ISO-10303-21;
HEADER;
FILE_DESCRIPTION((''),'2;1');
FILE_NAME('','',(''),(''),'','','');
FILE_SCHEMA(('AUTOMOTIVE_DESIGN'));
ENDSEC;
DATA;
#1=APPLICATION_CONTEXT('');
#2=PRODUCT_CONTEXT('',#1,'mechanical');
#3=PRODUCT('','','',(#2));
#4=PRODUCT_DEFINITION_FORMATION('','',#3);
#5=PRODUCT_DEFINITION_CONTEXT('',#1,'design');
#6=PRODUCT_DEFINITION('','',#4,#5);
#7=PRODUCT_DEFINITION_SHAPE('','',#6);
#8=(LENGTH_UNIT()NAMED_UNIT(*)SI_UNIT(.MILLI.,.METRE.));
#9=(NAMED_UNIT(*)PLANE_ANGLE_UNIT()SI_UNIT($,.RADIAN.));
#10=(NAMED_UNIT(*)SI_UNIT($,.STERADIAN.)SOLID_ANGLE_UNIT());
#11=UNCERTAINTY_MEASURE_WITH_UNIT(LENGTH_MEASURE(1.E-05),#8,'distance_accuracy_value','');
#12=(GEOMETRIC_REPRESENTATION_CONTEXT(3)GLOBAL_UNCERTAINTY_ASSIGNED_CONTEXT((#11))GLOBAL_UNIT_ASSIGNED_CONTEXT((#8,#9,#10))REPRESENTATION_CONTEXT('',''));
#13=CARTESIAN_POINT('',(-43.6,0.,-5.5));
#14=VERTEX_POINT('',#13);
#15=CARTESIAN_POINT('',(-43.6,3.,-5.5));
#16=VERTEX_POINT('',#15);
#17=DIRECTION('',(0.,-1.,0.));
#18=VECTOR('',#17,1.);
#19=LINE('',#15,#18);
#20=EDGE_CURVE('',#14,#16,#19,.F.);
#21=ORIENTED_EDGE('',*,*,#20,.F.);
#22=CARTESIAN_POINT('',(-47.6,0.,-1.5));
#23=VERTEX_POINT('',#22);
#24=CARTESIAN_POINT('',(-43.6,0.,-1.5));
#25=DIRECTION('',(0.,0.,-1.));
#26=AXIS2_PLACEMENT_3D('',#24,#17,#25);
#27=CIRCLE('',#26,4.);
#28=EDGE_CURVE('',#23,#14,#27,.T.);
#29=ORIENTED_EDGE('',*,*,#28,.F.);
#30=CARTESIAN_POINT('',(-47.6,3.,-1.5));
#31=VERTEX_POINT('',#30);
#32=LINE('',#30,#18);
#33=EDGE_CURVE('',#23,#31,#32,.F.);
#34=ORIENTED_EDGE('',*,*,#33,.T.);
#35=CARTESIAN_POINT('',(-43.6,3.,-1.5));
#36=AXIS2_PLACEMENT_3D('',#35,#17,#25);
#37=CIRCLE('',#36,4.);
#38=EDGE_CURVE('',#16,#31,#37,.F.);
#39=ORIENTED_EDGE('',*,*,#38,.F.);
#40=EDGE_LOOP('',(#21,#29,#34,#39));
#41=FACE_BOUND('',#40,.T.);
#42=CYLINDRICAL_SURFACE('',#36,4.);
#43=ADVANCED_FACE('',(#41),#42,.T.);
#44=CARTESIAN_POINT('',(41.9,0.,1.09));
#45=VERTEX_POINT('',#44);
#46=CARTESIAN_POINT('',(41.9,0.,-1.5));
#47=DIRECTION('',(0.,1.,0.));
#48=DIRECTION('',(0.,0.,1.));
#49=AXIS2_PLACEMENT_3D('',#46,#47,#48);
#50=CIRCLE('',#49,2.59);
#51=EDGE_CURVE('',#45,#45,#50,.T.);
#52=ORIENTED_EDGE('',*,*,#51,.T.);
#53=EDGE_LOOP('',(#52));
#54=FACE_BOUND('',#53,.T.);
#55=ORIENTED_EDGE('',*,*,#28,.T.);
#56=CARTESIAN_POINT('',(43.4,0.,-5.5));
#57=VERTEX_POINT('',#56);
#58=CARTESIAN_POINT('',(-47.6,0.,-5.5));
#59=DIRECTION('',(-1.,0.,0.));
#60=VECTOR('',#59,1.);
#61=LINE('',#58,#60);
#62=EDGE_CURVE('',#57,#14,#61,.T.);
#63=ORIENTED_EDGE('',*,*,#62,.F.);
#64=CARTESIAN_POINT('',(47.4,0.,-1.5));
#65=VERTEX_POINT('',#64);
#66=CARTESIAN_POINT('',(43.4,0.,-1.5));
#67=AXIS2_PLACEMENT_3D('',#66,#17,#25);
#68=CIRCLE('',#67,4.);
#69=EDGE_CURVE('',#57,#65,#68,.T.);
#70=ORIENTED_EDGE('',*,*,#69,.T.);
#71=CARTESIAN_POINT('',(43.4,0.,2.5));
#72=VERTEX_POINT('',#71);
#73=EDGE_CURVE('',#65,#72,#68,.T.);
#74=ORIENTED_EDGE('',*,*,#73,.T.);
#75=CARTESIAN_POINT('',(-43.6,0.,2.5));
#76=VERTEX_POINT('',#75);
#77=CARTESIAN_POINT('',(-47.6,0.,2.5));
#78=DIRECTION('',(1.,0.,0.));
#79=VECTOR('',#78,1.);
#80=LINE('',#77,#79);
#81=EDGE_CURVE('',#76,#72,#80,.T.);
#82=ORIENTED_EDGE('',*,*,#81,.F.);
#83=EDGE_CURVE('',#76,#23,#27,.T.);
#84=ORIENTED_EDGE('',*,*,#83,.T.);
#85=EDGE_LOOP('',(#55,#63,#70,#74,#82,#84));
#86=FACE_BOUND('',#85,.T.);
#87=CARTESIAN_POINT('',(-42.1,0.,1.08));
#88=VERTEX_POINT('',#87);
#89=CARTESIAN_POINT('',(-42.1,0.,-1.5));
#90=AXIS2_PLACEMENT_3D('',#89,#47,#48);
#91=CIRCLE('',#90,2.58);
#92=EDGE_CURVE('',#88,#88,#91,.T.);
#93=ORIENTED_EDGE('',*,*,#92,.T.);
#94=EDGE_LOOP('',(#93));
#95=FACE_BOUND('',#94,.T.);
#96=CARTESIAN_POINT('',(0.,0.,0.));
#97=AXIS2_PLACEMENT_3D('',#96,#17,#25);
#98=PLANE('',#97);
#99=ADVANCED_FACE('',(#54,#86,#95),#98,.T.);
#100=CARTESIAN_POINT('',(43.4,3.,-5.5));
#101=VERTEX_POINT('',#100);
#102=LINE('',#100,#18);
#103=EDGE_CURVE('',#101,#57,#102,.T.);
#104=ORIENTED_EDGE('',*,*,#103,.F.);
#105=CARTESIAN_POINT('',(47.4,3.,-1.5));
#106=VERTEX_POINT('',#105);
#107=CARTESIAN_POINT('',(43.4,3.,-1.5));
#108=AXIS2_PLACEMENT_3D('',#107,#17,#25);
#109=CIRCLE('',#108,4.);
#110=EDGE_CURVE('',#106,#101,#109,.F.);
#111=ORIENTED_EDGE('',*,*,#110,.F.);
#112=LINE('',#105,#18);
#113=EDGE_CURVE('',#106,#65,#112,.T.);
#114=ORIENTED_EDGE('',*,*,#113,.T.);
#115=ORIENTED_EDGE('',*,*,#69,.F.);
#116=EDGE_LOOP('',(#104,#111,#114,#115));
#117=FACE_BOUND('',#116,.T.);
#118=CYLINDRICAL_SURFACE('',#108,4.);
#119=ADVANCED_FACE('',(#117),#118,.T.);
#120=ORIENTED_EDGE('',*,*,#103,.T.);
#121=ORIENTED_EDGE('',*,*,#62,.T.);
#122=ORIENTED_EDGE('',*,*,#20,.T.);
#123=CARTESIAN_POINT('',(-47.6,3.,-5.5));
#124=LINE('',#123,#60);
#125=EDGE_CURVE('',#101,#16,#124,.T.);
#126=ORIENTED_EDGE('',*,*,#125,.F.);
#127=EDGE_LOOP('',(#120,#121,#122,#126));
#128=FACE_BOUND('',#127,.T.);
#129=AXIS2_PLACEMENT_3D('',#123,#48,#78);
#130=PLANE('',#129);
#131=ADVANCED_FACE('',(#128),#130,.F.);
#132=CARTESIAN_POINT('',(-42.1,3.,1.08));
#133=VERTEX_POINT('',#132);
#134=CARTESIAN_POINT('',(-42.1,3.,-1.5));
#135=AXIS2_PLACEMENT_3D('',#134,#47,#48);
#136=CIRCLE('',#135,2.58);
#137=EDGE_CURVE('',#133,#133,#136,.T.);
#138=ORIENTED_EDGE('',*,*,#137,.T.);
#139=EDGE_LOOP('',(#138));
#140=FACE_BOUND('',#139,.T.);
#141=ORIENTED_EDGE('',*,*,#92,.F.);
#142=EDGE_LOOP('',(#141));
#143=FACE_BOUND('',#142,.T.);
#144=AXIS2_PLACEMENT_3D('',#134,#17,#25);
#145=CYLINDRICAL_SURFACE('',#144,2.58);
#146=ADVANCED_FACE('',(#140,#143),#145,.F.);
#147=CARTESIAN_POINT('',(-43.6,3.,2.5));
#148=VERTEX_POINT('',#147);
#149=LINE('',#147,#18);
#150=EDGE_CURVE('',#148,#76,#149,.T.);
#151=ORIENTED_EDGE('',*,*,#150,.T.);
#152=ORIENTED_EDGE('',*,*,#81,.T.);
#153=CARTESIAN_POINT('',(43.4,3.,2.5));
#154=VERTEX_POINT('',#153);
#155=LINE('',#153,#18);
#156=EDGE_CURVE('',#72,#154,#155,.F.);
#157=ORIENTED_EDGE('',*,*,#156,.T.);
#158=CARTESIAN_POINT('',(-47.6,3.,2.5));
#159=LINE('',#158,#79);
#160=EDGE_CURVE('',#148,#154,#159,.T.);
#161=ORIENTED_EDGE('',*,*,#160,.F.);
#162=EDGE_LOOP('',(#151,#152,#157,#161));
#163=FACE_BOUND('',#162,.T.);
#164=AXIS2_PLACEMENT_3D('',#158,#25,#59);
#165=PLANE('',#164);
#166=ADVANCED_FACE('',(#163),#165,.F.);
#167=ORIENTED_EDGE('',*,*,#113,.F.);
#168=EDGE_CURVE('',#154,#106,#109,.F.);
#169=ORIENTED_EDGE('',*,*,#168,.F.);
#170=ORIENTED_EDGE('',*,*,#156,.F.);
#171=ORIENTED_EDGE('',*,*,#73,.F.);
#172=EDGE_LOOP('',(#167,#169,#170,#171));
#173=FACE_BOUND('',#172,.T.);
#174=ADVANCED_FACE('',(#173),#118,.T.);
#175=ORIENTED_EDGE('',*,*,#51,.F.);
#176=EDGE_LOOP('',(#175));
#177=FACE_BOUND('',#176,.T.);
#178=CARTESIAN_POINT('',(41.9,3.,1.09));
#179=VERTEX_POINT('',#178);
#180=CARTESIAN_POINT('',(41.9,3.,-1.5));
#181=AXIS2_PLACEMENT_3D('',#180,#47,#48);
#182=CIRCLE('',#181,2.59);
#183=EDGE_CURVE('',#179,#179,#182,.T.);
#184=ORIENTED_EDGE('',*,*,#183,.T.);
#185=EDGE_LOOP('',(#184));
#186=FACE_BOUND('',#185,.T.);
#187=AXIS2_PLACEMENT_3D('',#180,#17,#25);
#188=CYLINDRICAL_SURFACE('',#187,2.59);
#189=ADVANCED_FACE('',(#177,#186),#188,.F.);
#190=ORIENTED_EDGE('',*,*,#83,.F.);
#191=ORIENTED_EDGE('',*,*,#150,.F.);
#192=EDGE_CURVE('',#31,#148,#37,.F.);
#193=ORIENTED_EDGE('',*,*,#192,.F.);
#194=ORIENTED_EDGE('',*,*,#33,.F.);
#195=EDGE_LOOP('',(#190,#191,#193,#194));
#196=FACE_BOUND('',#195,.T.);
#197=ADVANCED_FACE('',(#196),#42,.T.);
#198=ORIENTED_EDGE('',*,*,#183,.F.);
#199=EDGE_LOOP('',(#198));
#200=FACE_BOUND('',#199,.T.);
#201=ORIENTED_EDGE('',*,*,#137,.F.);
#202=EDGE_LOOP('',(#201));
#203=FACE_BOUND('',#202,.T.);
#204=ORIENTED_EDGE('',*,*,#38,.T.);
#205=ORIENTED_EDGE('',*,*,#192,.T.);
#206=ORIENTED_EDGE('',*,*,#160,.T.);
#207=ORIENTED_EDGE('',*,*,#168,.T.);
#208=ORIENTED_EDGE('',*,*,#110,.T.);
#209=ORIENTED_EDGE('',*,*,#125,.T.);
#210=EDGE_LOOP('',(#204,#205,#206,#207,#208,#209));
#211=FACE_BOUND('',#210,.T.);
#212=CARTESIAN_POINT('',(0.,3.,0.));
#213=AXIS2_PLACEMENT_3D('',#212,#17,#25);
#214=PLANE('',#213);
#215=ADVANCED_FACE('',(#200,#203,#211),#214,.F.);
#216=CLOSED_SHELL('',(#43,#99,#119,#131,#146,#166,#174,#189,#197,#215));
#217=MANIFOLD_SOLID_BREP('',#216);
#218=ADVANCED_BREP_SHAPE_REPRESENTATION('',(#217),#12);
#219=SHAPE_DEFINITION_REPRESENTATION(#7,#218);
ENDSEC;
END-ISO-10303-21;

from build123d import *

# Parameters (mm, degrees)
SKETCH1_W           = 95
SKETCH1_H           = 8
SKETCH1_R           = 2.58
SKETCH1_R_2         = 2.59
BOSS_EXTRUDE1_DEPTH = 3
REDONDEO2_R         = 4


with BuildPart() as part:
    # Sketch1 → Boss-Extrude1 (new body)
    with BuildSketch(Plane(origin=(0, 0, 0), x_dir=(1, 0, 0), z_dir=(0, 1, 0))):
        with Locations((-0.1, 1.5)):
            Rectangle(SKETCH1_W, SKETCH1_H)
        with Locations(Location((-42.1, 1.5, 0), (0, 0, 270))):
            Circle(SKETCH1_R, mode=Mode.SUBTRACT)
        with Locations(Location((41.9, 1.5, 0), (0, 0, 270))):
            Circle(SKETCH1_R_2, mode=Mode.SUBTRACT)
    extrude(amount=BOSS_EXTRUDE1_DEPTH)

    # Redondeo2
    redondeo2_edges = [part.edges().sort_by_distance(p)[0] for p in [
        (47.4, 1.5, -5.5),
        (47.4, 1.5, 2.5),
        (-47.6, 1.5, -5.5),
        (-47.6, 1.5, 2.5),
    ]]
    fillet(redondeo2_edges, radius=REDONDEO2_R - 0.0001)  # a hair under: the kernel refuses the full size


solid = part.part
